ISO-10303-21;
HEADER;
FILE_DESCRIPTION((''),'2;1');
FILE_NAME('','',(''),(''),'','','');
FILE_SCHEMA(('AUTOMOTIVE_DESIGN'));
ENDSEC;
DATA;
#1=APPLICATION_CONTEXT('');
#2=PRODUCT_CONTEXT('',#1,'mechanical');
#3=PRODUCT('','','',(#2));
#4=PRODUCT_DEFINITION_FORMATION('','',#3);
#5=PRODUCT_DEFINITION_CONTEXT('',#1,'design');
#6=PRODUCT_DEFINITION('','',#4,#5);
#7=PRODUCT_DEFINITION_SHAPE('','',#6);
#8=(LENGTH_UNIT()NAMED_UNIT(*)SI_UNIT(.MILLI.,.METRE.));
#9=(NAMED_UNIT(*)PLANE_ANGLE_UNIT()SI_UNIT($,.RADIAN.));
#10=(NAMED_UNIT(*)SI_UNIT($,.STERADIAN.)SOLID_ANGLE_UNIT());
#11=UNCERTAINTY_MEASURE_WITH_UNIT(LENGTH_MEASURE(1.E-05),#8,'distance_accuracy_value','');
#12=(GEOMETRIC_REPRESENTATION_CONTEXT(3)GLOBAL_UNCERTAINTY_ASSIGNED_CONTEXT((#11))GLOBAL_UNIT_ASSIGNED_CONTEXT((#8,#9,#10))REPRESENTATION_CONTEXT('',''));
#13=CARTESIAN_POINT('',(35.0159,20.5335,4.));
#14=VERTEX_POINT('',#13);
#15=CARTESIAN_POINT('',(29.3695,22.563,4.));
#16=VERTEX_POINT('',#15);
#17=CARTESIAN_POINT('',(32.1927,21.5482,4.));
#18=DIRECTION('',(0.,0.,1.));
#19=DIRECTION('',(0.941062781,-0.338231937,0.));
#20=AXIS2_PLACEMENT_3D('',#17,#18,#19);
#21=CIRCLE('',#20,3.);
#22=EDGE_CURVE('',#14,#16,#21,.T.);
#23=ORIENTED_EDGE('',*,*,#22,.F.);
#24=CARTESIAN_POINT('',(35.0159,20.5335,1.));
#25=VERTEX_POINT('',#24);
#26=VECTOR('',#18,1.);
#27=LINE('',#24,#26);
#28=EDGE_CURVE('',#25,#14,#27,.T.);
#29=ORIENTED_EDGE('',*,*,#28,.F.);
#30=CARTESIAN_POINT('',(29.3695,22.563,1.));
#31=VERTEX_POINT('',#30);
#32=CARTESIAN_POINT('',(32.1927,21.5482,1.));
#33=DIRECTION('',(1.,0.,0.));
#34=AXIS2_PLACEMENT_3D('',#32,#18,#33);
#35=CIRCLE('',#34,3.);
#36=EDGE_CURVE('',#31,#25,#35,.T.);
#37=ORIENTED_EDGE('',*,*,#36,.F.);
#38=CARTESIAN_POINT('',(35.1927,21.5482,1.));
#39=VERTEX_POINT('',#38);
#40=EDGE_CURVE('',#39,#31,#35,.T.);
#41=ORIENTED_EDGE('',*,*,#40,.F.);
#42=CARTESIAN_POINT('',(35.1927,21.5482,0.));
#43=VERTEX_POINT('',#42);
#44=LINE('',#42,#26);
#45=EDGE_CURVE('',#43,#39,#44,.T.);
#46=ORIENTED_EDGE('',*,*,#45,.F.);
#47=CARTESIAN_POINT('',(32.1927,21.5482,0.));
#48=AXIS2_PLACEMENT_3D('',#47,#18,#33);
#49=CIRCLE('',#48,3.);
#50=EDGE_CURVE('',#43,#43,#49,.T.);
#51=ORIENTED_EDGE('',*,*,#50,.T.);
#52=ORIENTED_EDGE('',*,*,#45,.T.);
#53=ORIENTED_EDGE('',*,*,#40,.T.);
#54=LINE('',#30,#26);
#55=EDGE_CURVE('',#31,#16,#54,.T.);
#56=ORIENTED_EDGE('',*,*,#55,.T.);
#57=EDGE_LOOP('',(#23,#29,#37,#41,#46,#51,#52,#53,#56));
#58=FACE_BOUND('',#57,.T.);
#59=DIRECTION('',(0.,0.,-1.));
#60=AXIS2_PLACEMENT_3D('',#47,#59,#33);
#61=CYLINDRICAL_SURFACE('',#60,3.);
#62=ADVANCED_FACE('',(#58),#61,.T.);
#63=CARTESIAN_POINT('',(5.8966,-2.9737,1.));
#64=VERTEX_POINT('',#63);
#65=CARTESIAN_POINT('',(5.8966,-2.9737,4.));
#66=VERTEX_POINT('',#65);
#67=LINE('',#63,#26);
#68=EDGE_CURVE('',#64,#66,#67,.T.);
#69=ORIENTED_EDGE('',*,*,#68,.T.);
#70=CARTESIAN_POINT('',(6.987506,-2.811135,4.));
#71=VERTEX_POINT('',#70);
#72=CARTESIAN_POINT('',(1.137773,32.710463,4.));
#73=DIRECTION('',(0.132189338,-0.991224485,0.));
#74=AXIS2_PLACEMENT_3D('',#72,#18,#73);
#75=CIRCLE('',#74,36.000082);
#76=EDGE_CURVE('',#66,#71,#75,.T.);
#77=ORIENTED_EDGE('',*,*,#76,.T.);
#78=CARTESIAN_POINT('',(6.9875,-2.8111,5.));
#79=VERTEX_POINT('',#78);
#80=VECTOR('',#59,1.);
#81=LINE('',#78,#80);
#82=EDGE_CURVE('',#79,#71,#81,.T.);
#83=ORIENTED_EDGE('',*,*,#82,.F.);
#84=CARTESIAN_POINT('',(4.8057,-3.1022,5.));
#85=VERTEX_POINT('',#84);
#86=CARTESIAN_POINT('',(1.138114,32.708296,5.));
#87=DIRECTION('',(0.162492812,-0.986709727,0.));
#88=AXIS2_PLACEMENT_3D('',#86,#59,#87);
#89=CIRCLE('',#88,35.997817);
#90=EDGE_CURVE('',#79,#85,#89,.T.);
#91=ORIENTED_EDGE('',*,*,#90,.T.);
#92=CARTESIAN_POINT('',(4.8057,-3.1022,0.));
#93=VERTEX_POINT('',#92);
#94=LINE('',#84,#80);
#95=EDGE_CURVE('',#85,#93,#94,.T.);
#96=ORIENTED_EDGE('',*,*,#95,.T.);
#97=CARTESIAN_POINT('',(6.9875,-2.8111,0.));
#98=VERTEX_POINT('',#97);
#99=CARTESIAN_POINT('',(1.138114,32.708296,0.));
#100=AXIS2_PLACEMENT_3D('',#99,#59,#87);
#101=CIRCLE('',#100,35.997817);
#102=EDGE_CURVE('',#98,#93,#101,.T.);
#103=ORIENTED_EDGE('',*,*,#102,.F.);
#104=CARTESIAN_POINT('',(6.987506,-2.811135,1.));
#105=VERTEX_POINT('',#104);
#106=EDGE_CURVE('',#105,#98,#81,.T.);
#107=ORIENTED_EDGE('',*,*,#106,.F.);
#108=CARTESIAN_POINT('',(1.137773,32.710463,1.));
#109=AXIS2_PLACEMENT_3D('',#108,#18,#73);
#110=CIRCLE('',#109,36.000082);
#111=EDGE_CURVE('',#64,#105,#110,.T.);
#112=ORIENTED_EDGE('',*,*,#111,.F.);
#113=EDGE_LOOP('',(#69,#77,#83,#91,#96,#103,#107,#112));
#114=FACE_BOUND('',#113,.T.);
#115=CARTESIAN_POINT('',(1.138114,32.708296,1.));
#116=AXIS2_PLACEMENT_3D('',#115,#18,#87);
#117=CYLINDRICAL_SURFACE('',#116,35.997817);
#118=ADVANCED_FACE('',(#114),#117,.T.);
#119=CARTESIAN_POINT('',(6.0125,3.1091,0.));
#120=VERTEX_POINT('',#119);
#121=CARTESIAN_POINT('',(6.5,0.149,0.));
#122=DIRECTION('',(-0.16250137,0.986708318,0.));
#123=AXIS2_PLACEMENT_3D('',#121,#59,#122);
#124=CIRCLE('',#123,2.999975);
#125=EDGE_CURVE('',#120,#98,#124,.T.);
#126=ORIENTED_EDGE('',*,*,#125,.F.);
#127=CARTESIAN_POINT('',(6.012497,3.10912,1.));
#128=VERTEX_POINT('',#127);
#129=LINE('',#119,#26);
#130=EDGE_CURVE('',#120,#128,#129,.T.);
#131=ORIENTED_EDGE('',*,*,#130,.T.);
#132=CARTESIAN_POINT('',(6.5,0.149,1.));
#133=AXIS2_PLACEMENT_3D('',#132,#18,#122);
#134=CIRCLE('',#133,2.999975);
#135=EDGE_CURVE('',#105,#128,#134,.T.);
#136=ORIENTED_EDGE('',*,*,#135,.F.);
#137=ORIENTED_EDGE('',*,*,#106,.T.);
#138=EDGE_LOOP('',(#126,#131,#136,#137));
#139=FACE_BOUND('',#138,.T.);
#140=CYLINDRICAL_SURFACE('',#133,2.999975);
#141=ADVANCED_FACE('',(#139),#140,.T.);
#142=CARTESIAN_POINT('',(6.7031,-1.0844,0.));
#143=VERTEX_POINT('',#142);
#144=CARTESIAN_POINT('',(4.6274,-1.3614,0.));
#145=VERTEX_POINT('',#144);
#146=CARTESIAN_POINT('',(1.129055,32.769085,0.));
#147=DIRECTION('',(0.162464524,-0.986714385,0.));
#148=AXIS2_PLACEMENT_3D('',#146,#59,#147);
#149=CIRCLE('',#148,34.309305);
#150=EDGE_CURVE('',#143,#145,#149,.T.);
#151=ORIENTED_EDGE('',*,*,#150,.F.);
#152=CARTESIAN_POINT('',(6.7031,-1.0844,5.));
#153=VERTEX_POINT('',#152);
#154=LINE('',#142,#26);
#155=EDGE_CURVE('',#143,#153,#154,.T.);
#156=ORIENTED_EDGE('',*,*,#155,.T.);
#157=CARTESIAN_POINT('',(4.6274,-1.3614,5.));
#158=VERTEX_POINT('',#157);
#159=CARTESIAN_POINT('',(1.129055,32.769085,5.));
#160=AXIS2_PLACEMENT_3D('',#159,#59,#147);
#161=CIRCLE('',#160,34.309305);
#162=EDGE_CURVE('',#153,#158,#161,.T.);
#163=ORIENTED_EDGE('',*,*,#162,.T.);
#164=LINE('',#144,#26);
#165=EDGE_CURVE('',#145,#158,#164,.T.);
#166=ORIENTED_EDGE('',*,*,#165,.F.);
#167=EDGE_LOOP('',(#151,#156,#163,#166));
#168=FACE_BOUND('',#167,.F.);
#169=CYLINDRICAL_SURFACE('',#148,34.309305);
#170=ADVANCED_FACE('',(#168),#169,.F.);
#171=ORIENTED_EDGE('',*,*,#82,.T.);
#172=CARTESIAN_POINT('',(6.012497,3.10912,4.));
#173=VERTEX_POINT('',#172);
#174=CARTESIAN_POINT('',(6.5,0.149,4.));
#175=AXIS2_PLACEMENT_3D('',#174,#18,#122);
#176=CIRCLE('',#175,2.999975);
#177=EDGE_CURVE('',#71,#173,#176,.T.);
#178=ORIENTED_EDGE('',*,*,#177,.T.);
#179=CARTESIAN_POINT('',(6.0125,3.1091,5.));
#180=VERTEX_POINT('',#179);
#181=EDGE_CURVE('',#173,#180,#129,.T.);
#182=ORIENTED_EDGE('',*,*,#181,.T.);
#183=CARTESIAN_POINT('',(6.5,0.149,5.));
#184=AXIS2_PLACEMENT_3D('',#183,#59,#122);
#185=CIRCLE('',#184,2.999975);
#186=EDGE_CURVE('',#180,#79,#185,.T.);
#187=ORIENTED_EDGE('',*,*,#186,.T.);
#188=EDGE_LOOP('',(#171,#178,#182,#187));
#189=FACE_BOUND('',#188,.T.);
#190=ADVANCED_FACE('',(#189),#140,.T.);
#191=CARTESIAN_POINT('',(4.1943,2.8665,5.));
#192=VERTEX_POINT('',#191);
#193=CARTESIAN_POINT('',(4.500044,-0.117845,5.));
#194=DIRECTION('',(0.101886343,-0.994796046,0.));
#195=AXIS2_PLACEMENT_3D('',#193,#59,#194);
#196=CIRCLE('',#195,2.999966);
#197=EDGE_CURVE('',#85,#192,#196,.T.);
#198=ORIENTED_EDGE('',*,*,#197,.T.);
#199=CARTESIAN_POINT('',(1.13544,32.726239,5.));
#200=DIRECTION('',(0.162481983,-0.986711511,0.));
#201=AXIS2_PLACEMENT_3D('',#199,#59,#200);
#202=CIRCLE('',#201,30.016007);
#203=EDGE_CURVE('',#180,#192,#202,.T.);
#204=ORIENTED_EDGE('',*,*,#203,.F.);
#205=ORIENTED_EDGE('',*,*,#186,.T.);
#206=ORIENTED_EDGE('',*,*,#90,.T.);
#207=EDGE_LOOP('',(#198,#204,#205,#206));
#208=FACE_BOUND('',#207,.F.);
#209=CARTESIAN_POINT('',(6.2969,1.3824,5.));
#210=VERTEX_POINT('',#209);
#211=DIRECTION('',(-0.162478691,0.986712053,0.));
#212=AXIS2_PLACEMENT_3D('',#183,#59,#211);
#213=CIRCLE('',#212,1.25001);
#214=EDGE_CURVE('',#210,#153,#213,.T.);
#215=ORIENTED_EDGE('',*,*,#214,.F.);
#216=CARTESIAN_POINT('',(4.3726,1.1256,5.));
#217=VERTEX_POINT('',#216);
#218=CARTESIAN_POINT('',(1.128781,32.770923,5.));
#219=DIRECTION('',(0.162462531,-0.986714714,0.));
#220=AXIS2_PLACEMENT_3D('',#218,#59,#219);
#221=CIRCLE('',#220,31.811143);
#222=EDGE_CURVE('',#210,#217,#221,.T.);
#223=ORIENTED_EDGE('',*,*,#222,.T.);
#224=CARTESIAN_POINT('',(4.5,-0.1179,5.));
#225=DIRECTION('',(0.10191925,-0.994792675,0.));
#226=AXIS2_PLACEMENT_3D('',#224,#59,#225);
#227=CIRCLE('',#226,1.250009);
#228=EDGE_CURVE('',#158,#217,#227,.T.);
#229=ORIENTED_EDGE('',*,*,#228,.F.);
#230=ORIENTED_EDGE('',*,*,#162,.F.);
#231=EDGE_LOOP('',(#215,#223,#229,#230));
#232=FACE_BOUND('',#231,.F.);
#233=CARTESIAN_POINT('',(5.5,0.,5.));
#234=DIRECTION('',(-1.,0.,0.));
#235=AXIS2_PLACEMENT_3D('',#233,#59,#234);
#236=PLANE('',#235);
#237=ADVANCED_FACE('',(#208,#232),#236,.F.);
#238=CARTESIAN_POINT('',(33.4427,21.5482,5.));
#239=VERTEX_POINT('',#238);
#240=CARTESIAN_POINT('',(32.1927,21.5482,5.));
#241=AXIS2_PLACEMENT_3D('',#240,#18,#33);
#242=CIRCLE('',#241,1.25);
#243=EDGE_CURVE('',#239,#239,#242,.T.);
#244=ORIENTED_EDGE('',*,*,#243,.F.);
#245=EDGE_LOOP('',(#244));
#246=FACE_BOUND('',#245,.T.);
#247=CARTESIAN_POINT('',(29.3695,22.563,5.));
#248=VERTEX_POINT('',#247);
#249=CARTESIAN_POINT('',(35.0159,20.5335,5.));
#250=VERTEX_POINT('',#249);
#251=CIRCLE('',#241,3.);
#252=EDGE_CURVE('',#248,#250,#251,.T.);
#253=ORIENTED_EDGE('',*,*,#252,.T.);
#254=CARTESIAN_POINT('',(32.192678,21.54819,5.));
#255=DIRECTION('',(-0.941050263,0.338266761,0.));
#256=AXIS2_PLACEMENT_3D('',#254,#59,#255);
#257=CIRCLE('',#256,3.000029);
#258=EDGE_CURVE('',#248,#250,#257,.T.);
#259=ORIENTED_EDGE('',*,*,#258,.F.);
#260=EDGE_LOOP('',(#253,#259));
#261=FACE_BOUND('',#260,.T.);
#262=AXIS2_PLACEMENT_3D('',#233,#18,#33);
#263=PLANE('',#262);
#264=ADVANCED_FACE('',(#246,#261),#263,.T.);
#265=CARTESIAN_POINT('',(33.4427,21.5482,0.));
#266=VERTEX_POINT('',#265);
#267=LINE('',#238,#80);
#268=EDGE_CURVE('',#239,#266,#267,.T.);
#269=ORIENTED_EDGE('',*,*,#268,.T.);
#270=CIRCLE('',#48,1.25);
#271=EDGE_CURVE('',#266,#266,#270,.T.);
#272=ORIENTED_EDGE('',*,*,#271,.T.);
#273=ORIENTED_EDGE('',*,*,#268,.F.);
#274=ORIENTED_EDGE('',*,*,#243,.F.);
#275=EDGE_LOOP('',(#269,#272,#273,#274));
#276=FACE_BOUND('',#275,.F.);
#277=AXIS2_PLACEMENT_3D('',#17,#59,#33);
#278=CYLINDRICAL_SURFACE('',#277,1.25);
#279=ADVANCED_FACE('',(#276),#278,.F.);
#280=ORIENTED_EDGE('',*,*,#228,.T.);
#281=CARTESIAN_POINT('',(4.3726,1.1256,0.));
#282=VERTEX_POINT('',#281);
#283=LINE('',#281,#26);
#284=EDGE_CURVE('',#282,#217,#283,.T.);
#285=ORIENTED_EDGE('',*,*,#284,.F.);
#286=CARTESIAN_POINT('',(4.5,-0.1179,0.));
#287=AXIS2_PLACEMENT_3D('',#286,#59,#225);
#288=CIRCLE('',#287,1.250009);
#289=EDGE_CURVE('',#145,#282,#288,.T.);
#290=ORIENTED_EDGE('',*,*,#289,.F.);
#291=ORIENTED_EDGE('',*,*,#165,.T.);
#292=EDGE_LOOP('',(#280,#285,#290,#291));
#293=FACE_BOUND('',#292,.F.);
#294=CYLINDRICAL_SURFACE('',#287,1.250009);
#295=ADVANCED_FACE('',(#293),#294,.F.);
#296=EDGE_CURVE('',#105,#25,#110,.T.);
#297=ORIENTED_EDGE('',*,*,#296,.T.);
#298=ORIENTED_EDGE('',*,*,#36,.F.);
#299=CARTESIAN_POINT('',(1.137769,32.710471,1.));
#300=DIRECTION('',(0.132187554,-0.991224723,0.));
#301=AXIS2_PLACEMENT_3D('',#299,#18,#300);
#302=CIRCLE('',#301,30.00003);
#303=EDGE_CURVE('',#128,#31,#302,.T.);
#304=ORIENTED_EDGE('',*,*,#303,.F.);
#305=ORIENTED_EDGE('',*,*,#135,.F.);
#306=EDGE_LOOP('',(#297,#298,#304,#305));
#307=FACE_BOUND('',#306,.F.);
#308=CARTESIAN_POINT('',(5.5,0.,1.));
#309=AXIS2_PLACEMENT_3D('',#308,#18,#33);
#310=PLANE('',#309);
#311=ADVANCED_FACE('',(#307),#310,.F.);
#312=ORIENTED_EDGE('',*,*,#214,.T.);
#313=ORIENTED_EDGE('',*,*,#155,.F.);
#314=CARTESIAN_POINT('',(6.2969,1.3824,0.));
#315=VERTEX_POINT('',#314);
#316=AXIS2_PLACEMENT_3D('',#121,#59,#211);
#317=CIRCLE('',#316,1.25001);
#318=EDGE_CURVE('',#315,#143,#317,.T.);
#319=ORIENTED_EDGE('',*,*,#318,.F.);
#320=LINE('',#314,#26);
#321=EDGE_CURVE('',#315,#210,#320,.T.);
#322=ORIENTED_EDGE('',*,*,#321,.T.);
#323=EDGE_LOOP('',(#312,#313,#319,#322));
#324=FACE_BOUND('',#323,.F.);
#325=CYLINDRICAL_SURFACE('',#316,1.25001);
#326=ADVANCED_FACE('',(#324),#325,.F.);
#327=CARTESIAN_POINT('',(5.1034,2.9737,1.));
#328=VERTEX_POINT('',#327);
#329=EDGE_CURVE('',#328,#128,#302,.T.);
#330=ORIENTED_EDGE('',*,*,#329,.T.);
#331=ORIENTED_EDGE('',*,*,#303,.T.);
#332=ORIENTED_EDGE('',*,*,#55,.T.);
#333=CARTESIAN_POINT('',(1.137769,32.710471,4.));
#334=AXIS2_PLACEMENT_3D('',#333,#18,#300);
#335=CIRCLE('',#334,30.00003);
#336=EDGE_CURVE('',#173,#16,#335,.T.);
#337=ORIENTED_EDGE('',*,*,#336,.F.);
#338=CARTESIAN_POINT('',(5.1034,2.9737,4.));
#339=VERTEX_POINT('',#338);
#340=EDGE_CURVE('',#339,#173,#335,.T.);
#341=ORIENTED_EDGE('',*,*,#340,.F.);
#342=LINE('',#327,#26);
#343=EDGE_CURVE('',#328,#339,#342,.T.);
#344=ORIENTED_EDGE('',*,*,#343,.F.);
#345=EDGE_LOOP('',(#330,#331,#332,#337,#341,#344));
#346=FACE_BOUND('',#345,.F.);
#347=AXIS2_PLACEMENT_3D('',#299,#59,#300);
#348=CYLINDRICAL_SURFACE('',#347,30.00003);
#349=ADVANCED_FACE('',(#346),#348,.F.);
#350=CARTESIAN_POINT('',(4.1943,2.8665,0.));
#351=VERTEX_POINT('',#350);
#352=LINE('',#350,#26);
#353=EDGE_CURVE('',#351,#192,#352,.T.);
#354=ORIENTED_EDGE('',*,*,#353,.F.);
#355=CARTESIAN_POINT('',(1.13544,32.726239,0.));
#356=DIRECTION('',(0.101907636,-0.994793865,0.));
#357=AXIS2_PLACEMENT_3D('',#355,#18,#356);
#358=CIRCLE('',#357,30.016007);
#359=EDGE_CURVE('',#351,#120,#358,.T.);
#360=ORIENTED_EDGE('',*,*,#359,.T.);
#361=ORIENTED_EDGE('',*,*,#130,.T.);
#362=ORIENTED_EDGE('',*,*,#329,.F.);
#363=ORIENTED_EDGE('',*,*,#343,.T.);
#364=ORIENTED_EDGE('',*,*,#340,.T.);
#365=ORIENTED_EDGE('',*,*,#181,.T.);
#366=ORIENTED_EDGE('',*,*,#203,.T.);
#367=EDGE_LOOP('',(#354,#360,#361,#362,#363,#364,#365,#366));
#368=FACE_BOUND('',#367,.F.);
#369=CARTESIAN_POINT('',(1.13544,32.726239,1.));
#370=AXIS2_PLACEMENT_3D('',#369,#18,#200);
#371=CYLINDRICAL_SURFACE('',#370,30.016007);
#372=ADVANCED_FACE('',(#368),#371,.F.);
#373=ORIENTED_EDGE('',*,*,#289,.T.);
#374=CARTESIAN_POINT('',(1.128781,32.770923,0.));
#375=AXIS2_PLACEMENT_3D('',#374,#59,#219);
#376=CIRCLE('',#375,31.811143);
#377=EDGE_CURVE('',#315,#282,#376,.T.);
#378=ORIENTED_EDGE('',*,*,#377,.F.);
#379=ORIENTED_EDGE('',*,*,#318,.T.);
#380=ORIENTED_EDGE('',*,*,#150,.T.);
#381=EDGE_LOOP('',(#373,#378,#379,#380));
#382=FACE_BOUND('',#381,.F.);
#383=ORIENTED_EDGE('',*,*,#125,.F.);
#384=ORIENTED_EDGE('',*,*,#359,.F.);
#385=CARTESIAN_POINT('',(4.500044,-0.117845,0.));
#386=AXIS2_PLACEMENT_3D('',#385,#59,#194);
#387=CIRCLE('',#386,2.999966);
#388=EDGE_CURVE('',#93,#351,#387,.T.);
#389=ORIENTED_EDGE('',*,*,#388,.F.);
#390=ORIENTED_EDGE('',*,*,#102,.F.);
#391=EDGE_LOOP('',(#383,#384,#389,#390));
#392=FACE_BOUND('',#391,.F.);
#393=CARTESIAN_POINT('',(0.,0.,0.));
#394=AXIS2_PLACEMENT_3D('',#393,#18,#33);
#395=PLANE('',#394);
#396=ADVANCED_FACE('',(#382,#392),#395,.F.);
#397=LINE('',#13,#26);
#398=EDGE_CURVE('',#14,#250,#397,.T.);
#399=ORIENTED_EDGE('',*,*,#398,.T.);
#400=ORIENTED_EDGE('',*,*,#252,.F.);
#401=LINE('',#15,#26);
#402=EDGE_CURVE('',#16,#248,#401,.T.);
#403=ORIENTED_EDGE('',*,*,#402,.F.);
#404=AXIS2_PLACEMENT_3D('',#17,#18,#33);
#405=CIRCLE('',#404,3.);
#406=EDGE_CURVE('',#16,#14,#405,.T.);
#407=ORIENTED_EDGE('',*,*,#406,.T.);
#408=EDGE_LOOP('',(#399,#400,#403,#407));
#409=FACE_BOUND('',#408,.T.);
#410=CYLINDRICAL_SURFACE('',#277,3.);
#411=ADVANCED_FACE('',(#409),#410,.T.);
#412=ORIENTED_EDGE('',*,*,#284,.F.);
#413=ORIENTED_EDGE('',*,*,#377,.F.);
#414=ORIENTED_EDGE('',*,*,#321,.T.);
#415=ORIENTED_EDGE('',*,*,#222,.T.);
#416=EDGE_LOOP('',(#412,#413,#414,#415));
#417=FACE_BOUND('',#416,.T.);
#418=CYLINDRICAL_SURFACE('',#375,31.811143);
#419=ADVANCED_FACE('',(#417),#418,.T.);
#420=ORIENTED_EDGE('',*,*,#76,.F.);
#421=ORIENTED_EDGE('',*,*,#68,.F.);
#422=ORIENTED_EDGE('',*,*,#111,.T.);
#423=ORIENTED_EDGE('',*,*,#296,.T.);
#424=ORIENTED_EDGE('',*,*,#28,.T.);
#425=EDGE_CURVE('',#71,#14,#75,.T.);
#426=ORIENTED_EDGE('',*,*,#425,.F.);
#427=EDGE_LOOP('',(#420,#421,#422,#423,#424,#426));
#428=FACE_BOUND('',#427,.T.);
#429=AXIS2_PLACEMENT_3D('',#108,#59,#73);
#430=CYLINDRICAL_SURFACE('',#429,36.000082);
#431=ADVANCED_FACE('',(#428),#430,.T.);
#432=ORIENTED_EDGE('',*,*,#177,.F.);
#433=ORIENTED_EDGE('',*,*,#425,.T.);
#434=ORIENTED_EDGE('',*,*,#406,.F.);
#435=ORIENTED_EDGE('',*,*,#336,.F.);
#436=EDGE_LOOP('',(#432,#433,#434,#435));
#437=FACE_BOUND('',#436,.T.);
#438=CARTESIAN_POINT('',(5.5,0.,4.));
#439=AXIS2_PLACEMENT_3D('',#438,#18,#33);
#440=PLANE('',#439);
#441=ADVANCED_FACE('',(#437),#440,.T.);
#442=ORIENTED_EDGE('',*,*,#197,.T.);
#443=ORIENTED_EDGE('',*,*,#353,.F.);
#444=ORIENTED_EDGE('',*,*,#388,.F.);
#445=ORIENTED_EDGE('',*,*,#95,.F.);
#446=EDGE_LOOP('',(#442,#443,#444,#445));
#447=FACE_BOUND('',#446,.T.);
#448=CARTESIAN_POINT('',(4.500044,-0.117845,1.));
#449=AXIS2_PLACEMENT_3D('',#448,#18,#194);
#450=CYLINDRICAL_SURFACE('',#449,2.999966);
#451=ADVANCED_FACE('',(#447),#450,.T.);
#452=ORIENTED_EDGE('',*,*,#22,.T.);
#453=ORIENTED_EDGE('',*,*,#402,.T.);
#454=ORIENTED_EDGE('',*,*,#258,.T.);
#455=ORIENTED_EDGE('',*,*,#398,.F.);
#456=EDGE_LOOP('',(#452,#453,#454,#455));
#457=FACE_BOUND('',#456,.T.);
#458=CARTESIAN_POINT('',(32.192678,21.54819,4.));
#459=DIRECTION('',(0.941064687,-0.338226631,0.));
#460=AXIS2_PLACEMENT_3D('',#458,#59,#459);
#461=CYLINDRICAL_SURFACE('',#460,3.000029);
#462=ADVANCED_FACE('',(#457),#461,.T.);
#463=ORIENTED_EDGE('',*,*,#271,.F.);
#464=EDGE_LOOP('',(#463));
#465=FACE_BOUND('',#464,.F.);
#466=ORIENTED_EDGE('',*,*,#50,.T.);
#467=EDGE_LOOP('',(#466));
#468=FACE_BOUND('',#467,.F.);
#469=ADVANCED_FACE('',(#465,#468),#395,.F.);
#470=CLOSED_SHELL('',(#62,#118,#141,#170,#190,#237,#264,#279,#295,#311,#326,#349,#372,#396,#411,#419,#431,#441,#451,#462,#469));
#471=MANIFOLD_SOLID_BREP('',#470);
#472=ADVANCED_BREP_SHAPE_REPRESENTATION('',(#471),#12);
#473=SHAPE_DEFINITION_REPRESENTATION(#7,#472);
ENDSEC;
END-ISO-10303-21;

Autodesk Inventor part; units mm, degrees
ref_plane "YZ Plane" through (0, 0, 0) normal (1, 0, 0) x (0, 1, 0)
ref_plane "XZ Plane" through (0, 0, 0) normal (0, 1, 0) x (-1, 0, 0)
ref_plane "XY Plane" through (0, 0, 0) normal (0, 0, 1) x (1, 0, 0)
sketch "Sketch1" plane through (0, 0, 0) normal (0, 0, 1) x (1, 0, 0)
  circle A0 centre (5.5, 0) radius 1.4795 projected
  circle A1 centre (32.1927, 21.5482) radius 1.25 projected
  circle A2 centre (5.5, 0) radius 3
  circle A3 centre (32.1927, 21.5482) radius 3
  point P0 (0, 0)
  dimension "d0" = 6
extrude "Extrusion1" add sketch "Sketch1" along normal blind 1
sketch "Sketch2" plane through (5.5, 0, 1) normal (0, 0, 1) x (1, 0, 0)
  circle A0 centre (0, 0) radius 3 projected
  circle A1 centre (0, 0) radius 1.4795 projected
  circle A2 centre (26.6927, 21.5482) radius 3 projected
  circle A3 centre (26.6927, 21.5482) radius 1.25 projected
  circle A4 centre (26.6927, 21.5482) radius 1.25 projected
  arc A5 (0, 0) -> (26.6927, 21.5482) centre (-4.3622, 32.7104) ccw construction
  arc A6 (0.3966, -2.9737) -> (29.5159, 20.5335) centre (-4.3622, 32.7104) ccw
  arc A7 (-0.3966, 2.9737) -> (23.8695, 22.563) centre (-4.3622, 32.7104) ccw
  arc A8 (-0.3966, 2.9737) -> (0.3966, -2.9737) centre (0, 0) ccw
  arc A9 (29.5159, 20.5335) -> (23.8695, 22.563) centre (26.6927, 21.5482) ccw
  circle A10 centre (19.7, 21.8678) radius 2.5 projected
  circle A11 centre (0, 0) radius 3 projected
  point P0 (-5.5, 0)
  point P1 (23.8695, 22.563)
  point P2 (-0.3966, 2.9737)
  point P3 (0.3966, -2.9737)
  point P4 (29.5159, 20.5335)
  dimension "d3" = 30
extrude "Extrusion2" add sketch "Sketch2" along normal blind 3 contours A0 | A0 A7 A2 A6 | A2
sketch "Sketch3" plane through (5.5, 0, 1) normal (0, 0, -1) x (-1, 0, 0)
  arc A0 (-29.5159, 20.5335) -> (-23.8695, 22.563) centre (-26.6927, 21.5482) ccw construction
  arc A1 (-29.5159, 20.5335) -> (-0.3966, -2.9737) centre (4.3622, 32.7104) ccw construction
  arc A2 (0.3966, 2.9737) -> (-0.3966, -2.9737) centre (0, 0) ccw construction
  arc A3 (-23.8695, 22.563) -> (0.3966, 2.9737) centre (4.3622, 32.7104) ccw construction
  circle A4 centre (0, 0) radius 3 construction
  circle A5 centre (0, 0) radius 1.4795 construction
  arc A6 (-1, 0.149) -> (1, -0.1179) centre (4.3622, 32.7104) ccw construction
  arc A7 (-1.4875, -2.8111) -> (0.6943, -3.1022) centre (4.3622, 32.7104) ccw
  arc A8 (-0.5125, 3.1091) -> (1.3057, 2.8665) centre (4.3622, 32.7104) ccw
  arc A9 (-0.5125, 3.1091) -> (-1.4875, -2.8111) centre (-1, 0.149) ccw
  arc A10 (0.6943, -3.1022) -> (1.3057, 2.8665) centre (1, -0.1179) ccw
  point P0 (5.5, 0)
  dimension "d6" = 1
  dimension "d7" = 1
extrude "Extrusion3" add sketch "Sketch3" along normal blind 1 and the other way blind 4
sketch "Sketch4" plane through (5.5, 0, 4) normal (0, 0, 1) x (1, 0, 0)
  arc A0 (29.5159, 20.5335) -> (23.8695, 22.563) centre (26.6927, 21.5482) ccw projected
  circle A1 centre (26.6927, 21.5482) radius 1.25 projected
  circle A2 centre (26.6927, 21.5482) radius 3 projected
  circle A3 centre (26.6927, 21.5482) radius 3
  point P0 (-5.5, 0)
extrude "Extrusion4" add sketch "Sketch4" along normal blind 1
sketch "Sketch5" plane through (0, 0, 0) normal (0, 0, -1) x (-1, 0, 0)
  arc A0 (-6.9875, -2.8111) -> (-4.8057, -3.1022) centre (-1.1378, 32.7104) ccw projected
  arc A1 (-4.8057, -3.1022) -> (-4.1943, 2.8665) centre (-4.5, -0.1179) ccw projected
  arc A2 (-6.0125, 3.1091) -> (-4.1943, 2.8665) centre (-1.1378, 32.7104) ccw projected
  arc A3 (-6.0125, 3.1091) -> (-6.9875, -2.8111) centre (-6.5, 0.149) ccw projected
  arc A4 (-6.5, 0.149) -> (-4.5, -0.1179) centre (-1.1378, 32.7104) ccw construction
  arc A5 (-6.7031, -1.0844) -> (-4.6274, -1.3614) centre (-1.1378, 32.7104) ccw
  arc A6 (-6.2969, 1.3824) -> (-4.3726, 1.1256) centre (-1.1378, 32.7104) ccw
  arc A7 (-6.2969, 1.3824) -> (-6.7031, -1.0844) centre (-6.5, 0.149) ccw
  arc A8 (-4.6274, -1.3614) -> (-4.3726, 1.1256) centre (-4.5, -0.1179) ccw
  arc A9 (-6.9875, -2.8111) -> (-4.8057, -3.1022) centre (-1.1378, 32.7104) ccw projected
  point P0 (0, 0)
  dimension "d14" = 2.5
extrude "Extrusion5" cut sketch "Sketch5" against normal blind 5 contours A7 A6 A8 A5
equation "\"d7\" = d6"
